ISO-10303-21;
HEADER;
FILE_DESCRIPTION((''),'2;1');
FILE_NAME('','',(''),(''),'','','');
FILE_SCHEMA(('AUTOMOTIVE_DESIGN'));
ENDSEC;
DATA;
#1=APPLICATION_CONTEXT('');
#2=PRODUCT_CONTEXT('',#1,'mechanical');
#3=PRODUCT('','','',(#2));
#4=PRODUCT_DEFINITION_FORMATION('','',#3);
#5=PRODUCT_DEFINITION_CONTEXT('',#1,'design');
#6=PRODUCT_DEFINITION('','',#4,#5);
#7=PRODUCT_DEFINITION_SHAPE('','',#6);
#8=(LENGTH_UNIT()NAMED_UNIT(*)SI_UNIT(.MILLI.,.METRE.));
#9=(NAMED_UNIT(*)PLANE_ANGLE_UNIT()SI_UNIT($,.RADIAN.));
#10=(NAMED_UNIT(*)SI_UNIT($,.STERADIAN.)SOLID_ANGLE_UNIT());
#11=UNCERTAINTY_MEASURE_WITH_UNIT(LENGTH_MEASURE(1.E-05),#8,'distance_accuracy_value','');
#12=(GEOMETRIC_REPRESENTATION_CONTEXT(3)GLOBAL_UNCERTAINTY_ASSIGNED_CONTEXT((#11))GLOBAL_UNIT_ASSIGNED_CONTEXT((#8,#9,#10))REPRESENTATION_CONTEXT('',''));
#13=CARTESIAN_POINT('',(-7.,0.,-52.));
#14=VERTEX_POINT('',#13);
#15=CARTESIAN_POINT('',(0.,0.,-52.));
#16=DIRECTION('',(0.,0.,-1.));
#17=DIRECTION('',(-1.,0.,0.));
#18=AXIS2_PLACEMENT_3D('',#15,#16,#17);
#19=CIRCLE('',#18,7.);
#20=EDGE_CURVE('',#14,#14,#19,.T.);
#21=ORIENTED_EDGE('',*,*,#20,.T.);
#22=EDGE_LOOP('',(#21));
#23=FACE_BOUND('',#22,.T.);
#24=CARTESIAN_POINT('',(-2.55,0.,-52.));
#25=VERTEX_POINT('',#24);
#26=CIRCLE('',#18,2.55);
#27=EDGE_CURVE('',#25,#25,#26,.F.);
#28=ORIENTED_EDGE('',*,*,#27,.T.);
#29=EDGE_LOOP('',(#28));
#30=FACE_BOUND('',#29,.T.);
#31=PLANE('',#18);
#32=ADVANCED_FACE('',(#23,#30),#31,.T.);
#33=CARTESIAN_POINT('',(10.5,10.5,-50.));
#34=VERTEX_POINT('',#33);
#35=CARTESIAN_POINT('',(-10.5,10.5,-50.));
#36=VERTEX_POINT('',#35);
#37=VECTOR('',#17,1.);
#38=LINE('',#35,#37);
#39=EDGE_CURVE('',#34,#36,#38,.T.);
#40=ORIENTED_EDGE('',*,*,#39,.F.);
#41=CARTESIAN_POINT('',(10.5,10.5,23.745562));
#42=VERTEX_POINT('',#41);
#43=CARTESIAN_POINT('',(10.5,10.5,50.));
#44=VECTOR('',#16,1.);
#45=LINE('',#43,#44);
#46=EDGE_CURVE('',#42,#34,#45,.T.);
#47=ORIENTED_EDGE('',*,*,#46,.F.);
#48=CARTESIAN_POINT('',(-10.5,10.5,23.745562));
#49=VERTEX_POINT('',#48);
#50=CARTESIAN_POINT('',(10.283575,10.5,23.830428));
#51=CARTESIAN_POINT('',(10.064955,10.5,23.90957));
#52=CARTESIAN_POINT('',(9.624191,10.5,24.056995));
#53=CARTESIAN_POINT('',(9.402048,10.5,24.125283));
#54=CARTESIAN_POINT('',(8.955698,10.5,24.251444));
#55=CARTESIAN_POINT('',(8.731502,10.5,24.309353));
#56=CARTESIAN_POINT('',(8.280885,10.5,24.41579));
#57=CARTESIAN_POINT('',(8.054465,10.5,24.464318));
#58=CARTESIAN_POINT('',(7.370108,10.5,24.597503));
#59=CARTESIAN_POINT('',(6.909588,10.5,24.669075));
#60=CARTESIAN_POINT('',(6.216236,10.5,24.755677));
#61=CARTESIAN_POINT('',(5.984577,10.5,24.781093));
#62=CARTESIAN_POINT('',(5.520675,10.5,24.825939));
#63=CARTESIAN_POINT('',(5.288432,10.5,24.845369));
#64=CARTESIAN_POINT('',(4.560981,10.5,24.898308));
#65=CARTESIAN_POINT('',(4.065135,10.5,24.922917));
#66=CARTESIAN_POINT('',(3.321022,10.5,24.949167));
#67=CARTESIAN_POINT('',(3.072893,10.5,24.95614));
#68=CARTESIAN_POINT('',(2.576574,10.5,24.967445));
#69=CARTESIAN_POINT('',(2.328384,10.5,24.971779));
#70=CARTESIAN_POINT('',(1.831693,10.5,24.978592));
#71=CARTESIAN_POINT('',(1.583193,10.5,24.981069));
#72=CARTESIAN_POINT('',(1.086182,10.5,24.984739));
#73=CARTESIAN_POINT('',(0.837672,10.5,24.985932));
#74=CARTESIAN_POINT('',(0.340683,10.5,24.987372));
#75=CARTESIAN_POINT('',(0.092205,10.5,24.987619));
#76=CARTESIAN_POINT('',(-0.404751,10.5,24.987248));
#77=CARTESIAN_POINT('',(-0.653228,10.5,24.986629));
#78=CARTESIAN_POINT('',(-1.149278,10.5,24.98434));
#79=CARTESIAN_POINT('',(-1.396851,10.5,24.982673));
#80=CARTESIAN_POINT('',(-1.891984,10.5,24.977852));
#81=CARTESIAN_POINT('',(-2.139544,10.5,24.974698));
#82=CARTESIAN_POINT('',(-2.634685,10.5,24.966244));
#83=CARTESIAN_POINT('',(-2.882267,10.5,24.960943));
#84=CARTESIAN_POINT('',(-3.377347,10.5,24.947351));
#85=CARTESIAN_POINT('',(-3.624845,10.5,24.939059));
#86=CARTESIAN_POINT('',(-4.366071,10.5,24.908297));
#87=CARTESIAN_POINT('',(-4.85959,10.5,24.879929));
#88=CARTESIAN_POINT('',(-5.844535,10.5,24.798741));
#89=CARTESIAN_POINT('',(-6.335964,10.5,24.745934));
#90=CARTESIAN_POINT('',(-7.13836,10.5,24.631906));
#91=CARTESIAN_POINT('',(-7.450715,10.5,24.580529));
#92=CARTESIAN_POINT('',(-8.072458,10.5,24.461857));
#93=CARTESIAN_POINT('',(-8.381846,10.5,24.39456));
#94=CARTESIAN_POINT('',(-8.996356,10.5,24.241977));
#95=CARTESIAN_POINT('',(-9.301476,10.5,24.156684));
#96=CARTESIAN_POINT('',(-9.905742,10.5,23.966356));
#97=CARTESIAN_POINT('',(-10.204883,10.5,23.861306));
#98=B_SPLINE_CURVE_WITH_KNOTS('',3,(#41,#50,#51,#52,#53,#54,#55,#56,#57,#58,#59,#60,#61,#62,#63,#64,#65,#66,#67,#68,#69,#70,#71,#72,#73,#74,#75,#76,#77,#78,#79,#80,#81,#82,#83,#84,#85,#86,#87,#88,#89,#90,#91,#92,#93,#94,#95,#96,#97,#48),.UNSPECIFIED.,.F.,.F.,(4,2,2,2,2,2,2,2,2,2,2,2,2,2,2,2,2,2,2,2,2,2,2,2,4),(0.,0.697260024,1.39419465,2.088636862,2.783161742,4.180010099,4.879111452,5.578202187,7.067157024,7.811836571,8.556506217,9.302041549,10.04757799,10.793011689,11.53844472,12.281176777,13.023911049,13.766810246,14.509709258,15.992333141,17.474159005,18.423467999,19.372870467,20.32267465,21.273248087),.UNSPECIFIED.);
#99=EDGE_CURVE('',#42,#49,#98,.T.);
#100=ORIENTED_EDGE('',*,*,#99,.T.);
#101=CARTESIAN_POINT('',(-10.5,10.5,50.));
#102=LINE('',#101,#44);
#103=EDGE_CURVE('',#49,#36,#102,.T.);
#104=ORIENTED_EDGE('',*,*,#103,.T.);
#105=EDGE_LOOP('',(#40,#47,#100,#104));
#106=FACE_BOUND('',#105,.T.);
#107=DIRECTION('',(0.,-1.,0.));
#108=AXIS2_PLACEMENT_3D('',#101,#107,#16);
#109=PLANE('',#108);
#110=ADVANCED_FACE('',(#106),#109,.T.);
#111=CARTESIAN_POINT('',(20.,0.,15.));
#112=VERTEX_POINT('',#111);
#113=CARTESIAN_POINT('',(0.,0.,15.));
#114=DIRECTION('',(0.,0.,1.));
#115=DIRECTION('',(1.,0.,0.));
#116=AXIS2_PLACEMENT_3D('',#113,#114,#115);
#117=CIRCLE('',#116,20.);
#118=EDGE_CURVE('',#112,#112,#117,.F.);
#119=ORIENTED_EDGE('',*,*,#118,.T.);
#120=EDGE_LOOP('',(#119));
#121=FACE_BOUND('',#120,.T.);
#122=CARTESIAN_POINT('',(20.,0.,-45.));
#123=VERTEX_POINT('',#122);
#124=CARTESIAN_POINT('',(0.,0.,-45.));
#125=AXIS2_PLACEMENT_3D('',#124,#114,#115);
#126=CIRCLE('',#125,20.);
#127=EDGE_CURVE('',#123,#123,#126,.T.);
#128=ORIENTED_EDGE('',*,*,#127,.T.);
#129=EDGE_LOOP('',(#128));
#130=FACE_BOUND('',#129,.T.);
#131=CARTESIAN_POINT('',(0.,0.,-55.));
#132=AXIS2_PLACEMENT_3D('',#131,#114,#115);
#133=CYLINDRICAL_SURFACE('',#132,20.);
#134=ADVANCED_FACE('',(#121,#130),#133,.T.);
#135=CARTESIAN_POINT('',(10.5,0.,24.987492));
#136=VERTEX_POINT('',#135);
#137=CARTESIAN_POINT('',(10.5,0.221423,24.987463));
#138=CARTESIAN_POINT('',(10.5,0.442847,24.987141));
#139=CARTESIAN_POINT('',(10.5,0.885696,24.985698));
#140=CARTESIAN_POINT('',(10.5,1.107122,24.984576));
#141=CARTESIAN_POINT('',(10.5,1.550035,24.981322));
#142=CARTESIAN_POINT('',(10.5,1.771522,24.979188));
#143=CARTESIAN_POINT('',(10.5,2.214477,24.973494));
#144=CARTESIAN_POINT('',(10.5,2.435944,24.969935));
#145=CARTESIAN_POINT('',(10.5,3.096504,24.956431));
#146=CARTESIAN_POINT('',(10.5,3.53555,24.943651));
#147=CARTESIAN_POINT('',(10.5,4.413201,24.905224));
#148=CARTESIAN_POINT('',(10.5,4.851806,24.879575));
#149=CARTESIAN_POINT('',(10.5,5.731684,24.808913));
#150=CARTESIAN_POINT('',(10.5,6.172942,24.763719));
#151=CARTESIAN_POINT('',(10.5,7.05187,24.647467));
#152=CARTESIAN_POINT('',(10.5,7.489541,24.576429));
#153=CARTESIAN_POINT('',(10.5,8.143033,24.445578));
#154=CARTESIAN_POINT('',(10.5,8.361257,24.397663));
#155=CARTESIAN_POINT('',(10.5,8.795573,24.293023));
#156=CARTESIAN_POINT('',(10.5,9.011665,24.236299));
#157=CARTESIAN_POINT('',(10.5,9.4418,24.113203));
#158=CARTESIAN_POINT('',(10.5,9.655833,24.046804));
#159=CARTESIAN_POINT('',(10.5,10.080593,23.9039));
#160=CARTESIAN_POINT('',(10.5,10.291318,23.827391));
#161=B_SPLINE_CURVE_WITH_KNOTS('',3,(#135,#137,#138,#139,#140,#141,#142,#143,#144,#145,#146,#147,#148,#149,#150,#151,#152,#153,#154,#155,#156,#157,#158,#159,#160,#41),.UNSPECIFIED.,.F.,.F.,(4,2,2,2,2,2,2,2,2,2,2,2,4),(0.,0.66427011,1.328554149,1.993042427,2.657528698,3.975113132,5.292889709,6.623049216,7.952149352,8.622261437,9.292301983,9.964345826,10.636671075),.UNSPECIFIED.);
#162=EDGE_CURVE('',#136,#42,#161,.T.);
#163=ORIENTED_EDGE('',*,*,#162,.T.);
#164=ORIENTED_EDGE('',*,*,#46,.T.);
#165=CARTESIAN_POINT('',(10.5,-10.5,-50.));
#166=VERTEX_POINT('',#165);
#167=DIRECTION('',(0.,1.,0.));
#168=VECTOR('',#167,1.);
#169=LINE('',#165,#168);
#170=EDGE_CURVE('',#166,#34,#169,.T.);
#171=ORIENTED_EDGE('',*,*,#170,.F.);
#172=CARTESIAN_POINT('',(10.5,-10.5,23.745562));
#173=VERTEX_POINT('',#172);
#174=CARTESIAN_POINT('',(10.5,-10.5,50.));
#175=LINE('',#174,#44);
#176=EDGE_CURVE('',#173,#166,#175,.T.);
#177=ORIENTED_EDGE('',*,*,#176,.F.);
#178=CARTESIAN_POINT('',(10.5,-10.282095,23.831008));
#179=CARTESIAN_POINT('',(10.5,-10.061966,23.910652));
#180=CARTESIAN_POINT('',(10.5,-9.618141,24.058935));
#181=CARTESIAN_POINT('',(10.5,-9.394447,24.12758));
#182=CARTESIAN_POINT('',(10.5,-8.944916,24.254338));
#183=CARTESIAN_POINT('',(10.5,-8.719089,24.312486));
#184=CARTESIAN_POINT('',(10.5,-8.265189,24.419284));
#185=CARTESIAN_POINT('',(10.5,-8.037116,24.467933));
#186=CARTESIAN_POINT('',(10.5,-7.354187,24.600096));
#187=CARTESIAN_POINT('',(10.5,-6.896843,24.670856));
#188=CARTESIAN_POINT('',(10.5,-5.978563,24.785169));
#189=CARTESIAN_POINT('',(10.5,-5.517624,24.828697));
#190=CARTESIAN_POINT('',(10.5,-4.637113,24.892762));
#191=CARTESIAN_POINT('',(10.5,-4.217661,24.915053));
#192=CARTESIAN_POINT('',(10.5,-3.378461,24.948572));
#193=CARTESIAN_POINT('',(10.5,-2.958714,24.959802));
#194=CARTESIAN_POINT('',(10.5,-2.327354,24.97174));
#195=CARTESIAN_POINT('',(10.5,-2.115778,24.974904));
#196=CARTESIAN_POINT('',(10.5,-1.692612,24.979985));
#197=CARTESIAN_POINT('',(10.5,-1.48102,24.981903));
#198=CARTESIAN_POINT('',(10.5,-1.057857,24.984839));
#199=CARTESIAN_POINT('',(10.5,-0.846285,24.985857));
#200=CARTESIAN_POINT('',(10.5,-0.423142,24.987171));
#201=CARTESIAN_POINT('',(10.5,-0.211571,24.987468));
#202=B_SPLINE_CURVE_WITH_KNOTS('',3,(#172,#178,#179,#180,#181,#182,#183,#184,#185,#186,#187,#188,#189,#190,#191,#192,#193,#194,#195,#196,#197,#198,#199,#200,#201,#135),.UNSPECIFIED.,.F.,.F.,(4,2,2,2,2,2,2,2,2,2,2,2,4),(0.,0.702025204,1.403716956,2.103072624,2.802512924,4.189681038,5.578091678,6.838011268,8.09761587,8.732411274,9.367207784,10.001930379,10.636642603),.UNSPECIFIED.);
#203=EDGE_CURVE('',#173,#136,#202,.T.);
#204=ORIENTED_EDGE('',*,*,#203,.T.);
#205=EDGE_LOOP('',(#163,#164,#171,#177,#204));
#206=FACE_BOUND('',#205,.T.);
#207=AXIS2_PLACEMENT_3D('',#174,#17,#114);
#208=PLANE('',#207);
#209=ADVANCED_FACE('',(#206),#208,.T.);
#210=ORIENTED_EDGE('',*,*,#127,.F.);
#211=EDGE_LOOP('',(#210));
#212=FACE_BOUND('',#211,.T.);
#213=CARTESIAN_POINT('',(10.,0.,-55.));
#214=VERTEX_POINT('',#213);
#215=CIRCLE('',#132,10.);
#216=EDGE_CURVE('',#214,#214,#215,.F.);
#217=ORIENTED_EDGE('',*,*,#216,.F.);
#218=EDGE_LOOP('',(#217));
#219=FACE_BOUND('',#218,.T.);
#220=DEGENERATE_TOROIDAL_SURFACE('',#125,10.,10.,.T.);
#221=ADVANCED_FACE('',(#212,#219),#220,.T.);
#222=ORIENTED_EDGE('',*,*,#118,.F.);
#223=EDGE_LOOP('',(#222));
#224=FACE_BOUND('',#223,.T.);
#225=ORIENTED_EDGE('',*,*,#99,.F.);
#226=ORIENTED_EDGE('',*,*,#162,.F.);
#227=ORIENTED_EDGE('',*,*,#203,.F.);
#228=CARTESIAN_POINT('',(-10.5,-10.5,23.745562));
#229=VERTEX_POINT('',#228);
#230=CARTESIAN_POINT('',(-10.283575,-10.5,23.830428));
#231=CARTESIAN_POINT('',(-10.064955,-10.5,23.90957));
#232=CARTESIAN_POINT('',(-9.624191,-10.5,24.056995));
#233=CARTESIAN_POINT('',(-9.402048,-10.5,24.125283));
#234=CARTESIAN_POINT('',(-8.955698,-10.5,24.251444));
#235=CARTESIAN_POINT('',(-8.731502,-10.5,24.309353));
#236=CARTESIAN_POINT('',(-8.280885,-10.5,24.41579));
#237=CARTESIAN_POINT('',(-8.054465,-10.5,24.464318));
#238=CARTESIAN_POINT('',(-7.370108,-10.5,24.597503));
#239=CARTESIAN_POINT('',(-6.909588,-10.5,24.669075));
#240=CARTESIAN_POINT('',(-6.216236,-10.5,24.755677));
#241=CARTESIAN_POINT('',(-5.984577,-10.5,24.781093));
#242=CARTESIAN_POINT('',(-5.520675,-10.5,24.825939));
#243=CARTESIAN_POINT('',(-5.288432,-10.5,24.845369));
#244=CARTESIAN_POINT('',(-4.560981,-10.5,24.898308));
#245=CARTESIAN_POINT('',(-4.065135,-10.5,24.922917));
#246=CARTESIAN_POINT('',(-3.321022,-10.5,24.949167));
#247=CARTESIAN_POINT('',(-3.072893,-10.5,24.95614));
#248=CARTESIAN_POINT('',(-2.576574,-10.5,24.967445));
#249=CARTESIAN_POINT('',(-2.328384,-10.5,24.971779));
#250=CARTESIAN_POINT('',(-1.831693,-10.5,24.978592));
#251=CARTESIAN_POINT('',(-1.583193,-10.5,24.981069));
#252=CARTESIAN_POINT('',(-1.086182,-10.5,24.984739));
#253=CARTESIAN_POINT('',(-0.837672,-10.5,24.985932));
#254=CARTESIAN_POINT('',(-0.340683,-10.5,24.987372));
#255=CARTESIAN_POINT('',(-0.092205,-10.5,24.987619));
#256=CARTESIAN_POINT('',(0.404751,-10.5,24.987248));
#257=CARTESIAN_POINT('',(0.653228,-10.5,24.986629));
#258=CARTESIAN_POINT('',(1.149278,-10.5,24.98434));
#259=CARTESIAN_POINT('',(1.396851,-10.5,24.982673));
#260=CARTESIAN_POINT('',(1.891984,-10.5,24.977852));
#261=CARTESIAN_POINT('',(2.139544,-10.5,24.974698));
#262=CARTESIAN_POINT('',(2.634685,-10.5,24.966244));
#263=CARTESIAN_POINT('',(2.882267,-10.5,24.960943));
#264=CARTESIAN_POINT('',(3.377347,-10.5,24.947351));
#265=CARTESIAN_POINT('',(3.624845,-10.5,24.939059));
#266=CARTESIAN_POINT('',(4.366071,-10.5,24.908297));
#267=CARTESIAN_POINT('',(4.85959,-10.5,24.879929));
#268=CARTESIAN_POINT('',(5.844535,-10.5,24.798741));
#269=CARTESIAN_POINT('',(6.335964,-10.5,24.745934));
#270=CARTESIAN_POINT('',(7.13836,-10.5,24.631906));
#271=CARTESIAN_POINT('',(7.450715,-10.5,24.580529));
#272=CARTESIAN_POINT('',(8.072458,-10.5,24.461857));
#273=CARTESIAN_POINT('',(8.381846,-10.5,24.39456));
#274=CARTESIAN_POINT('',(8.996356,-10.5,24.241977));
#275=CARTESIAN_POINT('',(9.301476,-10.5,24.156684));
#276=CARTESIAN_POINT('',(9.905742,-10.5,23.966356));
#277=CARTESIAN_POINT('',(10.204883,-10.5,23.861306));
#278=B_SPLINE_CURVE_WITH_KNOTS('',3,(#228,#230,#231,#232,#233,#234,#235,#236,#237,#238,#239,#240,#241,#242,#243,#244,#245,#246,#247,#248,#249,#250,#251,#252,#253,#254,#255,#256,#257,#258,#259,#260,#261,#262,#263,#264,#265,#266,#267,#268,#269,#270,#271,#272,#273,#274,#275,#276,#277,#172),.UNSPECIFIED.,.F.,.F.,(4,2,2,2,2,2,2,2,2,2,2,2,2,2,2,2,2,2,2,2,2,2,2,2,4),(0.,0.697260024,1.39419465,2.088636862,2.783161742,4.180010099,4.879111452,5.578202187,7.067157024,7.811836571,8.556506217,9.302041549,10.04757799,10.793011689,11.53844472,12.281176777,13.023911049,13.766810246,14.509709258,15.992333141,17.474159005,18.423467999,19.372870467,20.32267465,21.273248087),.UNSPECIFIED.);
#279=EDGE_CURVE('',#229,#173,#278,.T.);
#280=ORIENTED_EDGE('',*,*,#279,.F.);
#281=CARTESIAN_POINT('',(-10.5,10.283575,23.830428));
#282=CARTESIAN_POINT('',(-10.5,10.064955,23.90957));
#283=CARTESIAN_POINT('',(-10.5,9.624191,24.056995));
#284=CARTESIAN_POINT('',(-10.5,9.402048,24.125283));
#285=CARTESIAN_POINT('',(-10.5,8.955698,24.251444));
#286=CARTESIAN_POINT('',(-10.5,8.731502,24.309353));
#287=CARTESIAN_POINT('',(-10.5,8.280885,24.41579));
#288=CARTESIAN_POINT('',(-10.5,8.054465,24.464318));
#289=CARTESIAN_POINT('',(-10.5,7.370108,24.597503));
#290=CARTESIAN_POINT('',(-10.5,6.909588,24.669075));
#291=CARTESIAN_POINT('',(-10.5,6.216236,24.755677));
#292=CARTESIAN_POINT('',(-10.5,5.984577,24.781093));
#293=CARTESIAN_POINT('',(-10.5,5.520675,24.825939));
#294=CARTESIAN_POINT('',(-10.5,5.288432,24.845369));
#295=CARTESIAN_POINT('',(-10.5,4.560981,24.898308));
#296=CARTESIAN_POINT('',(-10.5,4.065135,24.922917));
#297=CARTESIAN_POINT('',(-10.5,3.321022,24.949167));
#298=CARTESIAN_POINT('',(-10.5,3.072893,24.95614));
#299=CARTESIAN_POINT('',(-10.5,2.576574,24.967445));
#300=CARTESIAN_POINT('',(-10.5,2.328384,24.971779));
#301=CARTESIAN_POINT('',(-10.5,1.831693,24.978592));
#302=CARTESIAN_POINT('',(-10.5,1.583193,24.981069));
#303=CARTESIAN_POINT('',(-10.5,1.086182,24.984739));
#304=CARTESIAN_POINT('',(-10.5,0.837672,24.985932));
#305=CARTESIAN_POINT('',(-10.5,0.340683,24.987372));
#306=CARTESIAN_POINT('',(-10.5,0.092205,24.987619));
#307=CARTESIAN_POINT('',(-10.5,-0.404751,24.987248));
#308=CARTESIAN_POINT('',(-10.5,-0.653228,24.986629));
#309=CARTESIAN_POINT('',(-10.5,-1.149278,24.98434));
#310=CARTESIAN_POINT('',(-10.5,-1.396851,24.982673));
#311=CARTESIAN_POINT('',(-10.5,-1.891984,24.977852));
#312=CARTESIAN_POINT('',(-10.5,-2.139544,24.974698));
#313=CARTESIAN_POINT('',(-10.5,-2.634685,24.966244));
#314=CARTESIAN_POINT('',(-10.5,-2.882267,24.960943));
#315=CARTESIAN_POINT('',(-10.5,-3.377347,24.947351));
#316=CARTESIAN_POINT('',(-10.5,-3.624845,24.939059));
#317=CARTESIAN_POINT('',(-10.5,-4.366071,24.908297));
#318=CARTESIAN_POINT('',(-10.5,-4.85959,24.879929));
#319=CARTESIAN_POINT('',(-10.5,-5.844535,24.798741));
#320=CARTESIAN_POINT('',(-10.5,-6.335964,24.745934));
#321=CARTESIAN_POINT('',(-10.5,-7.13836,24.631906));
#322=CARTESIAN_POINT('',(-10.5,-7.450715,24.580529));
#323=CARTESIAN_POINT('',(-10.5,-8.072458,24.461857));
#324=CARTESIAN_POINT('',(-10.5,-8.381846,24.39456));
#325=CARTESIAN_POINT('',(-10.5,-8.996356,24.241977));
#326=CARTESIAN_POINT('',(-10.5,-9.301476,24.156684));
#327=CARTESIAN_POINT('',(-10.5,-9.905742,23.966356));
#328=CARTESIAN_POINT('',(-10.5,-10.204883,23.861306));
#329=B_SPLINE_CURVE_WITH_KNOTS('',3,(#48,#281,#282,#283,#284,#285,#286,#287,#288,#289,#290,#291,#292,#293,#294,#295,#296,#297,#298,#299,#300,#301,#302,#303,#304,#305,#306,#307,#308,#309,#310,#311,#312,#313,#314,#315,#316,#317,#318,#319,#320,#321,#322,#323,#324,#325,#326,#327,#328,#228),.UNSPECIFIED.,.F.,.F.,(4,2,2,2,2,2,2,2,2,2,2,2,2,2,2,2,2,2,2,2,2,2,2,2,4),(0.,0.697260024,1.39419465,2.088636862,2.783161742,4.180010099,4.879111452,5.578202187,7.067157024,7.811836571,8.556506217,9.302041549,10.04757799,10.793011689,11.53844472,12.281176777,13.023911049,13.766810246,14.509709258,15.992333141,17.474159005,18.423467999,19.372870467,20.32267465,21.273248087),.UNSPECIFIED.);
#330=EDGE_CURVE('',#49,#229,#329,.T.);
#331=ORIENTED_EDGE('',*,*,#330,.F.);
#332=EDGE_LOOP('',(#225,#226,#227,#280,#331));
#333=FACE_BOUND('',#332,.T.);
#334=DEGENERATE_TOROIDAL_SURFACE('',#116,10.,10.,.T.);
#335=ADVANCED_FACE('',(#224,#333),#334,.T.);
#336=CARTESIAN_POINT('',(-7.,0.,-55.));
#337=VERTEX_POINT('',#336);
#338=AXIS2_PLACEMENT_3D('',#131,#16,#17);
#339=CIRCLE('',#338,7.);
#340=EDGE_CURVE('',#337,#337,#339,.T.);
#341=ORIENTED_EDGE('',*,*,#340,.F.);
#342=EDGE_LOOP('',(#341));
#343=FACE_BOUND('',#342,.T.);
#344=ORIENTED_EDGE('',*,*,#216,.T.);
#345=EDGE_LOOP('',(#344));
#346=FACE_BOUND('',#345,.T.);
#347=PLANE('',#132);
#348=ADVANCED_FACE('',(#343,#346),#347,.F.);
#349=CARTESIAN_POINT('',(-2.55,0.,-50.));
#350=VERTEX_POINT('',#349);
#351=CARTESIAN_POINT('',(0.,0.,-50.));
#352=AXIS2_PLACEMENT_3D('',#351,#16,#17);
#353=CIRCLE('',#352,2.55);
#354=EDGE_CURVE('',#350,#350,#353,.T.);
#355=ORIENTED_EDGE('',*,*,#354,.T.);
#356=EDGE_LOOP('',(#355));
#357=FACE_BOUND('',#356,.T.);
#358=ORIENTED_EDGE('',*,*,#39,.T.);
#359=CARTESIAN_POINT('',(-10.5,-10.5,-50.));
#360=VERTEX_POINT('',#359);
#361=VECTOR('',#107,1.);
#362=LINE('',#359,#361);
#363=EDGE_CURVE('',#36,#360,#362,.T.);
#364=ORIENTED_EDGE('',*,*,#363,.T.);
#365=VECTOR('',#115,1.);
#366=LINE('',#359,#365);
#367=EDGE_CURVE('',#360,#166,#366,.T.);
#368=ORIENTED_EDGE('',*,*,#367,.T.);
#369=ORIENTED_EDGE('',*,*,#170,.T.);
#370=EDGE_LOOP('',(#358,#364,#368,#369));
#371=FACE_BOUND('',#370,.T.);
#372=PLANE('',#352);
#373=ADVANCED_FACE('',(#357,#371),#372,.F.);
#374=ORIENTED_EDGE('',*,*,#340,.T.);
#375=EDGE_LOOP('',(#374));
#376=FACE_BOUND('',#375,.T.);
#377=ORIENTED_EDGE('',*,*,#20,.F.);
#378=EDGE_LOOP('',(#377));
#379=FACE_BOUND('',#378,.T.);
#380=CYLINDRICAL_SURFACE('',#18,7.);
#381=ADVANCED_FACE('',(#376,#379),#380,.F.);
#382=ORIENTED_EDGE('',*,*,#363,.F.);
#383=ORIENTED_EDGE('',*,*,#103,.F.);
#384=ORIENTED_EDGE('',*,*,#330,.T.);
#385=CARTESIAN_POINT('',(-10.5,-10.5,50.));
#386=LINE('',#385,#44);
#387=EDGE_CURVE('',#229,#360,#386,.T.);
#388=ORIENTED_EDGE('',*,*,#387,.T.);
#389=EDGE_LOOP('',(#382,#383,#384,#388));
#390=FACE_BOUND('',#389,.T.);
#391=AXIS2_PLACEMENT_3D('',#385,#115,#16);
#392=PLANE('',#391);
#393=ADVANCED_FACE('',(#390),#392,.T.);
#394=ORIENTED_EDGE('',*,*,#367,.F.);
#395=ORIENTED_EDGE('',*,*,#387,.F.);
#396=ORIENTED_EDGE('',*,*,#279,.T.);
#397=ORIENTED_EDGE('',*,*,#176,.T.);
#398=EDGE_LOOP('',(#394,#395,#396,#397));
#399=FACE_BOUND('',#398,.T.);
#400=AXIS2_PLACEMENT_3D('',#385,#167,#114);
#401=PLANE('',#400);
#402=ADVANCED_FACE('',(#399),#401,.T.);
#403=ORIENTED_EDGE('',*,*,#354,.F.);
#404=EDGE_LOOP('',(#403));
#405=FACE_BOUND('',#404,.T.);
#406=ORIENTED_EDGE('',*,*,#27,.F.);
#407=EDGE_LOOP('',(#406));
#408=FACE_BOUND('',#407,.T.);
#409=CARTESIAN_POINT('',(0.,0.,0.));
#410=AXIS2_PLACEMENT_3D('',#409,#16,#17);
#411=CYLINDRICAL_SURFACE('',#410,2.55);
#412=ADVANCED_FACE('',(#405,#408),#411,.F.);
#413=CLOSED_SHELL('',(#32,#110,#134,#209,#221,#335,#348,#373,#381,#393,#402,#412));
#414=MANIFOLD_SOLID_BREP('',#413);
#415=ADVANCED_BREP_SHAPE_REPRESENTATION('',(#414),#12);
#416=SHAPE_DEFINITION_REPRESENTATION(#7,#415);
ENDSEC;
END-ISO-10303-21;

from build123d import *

# Parameters (mm, degrees)
SKETCH4_R               = 20
BODY_DEPTH              = 80
CUT_EXTRUDE1_DEPTH      = 50
CUT_EXTRUDE1_DEPTH_BACK = 50
SKETCH16_W              = 21
SKETCH16_H              = 21
SKETCH17_R              = 2.55
CUT_EXTRUDE2_DEPTH      = 55
SKETCH18_R              = 7
CUT_EXTRUDE3_DEPTH      = 3
FILLET1_R               = 10


with BuildPart() as part:
    # Sketch4 → Body (new body)
    with BuildSketch(Plane.XY.offset(25)):
        Circle(SKETCH4_R)
    extrude(amount=-BODY_DEPTH)

    # Sketch16 → Cut-Extrude1 (cut, two sides: drawn at the far end of the back side and taken through both)
    with BuildSketch(Plane.XY.offset(-CUT_EXTRUDE1_DEPTH_BACK)):
        Rectangle(SKETCH16_W, SKETCH16_H)
    extrude(amount=CUT_EXTRUDE1_DEPTH + CUT_EXTRUDE1_DEPTH_BACK, mode=Mode.SUBTRACT)

    # Sketch17 → Cut-Extrude2 (cut)
    with BuildSketch(Plane(origin=(0, 0, -55), x_dir=(-1, 0, 0), z_dir=(0, 0, -1))):
        Circle(SKETCH17_R)
    extrude(amount=-CUT_EXTRUDE2_DEPTH, mode=Mode.SUBTRACT)

    # Sketch18 → Cut-Extrude3 (cut)
    with BuildSketch(Plane(origin=(0, 0, -55), x_dir=(-1, 0, 0), z_dir=(0, 0, -1))):
        Circle(SKETCH18_R)
    extrude(amount=-CUT_EXTRUDE3_DEPTH, mode=Mode.SUBTRACT)

    # Fillet1
    # the kernel refuses this fillet: 10 mm, written as the material it takes off along each edge
    with BuildSketch(Plane(origin=(0, 0, 25), x_dir=(1, 0, 0), z_dir=(0, -1, 0))) as fillet1_piece_1:
        with BuildLine():
            CenterArc((20 - FILLET1_R, -FILLET1_R), FILLET1_R, 0, 90)
            Line((20 - FILLET1_R, 0), (20, 0))
            Line((20, 0), (20, -FILLET1_R))
        make_face()
    revolve(axis=Axis((0, 0, 25), (0, 0, 1)), mode=Mode.SUBTRACT)
    with BuildSketch(Plane(origin=(0, 0, -55), x_dir=(1, 0, 0), z_dir=(0, -1, 0))) as fillet1_piece_2:
        with BuildLine():
            CenterArc((20 - FILLET1_R, FILLET1_R), FILLET1_R, 270, 90)
            Line((20 - FILLET1_R, 0), (20, 0))
            Line((20, 0), (20, FILLET1_R))
        make_face()
    revolve(axis=Axis((0, 0, -55), (0, 0, 1)), mode=Mode.SUBTRACT)


solid = part.part
